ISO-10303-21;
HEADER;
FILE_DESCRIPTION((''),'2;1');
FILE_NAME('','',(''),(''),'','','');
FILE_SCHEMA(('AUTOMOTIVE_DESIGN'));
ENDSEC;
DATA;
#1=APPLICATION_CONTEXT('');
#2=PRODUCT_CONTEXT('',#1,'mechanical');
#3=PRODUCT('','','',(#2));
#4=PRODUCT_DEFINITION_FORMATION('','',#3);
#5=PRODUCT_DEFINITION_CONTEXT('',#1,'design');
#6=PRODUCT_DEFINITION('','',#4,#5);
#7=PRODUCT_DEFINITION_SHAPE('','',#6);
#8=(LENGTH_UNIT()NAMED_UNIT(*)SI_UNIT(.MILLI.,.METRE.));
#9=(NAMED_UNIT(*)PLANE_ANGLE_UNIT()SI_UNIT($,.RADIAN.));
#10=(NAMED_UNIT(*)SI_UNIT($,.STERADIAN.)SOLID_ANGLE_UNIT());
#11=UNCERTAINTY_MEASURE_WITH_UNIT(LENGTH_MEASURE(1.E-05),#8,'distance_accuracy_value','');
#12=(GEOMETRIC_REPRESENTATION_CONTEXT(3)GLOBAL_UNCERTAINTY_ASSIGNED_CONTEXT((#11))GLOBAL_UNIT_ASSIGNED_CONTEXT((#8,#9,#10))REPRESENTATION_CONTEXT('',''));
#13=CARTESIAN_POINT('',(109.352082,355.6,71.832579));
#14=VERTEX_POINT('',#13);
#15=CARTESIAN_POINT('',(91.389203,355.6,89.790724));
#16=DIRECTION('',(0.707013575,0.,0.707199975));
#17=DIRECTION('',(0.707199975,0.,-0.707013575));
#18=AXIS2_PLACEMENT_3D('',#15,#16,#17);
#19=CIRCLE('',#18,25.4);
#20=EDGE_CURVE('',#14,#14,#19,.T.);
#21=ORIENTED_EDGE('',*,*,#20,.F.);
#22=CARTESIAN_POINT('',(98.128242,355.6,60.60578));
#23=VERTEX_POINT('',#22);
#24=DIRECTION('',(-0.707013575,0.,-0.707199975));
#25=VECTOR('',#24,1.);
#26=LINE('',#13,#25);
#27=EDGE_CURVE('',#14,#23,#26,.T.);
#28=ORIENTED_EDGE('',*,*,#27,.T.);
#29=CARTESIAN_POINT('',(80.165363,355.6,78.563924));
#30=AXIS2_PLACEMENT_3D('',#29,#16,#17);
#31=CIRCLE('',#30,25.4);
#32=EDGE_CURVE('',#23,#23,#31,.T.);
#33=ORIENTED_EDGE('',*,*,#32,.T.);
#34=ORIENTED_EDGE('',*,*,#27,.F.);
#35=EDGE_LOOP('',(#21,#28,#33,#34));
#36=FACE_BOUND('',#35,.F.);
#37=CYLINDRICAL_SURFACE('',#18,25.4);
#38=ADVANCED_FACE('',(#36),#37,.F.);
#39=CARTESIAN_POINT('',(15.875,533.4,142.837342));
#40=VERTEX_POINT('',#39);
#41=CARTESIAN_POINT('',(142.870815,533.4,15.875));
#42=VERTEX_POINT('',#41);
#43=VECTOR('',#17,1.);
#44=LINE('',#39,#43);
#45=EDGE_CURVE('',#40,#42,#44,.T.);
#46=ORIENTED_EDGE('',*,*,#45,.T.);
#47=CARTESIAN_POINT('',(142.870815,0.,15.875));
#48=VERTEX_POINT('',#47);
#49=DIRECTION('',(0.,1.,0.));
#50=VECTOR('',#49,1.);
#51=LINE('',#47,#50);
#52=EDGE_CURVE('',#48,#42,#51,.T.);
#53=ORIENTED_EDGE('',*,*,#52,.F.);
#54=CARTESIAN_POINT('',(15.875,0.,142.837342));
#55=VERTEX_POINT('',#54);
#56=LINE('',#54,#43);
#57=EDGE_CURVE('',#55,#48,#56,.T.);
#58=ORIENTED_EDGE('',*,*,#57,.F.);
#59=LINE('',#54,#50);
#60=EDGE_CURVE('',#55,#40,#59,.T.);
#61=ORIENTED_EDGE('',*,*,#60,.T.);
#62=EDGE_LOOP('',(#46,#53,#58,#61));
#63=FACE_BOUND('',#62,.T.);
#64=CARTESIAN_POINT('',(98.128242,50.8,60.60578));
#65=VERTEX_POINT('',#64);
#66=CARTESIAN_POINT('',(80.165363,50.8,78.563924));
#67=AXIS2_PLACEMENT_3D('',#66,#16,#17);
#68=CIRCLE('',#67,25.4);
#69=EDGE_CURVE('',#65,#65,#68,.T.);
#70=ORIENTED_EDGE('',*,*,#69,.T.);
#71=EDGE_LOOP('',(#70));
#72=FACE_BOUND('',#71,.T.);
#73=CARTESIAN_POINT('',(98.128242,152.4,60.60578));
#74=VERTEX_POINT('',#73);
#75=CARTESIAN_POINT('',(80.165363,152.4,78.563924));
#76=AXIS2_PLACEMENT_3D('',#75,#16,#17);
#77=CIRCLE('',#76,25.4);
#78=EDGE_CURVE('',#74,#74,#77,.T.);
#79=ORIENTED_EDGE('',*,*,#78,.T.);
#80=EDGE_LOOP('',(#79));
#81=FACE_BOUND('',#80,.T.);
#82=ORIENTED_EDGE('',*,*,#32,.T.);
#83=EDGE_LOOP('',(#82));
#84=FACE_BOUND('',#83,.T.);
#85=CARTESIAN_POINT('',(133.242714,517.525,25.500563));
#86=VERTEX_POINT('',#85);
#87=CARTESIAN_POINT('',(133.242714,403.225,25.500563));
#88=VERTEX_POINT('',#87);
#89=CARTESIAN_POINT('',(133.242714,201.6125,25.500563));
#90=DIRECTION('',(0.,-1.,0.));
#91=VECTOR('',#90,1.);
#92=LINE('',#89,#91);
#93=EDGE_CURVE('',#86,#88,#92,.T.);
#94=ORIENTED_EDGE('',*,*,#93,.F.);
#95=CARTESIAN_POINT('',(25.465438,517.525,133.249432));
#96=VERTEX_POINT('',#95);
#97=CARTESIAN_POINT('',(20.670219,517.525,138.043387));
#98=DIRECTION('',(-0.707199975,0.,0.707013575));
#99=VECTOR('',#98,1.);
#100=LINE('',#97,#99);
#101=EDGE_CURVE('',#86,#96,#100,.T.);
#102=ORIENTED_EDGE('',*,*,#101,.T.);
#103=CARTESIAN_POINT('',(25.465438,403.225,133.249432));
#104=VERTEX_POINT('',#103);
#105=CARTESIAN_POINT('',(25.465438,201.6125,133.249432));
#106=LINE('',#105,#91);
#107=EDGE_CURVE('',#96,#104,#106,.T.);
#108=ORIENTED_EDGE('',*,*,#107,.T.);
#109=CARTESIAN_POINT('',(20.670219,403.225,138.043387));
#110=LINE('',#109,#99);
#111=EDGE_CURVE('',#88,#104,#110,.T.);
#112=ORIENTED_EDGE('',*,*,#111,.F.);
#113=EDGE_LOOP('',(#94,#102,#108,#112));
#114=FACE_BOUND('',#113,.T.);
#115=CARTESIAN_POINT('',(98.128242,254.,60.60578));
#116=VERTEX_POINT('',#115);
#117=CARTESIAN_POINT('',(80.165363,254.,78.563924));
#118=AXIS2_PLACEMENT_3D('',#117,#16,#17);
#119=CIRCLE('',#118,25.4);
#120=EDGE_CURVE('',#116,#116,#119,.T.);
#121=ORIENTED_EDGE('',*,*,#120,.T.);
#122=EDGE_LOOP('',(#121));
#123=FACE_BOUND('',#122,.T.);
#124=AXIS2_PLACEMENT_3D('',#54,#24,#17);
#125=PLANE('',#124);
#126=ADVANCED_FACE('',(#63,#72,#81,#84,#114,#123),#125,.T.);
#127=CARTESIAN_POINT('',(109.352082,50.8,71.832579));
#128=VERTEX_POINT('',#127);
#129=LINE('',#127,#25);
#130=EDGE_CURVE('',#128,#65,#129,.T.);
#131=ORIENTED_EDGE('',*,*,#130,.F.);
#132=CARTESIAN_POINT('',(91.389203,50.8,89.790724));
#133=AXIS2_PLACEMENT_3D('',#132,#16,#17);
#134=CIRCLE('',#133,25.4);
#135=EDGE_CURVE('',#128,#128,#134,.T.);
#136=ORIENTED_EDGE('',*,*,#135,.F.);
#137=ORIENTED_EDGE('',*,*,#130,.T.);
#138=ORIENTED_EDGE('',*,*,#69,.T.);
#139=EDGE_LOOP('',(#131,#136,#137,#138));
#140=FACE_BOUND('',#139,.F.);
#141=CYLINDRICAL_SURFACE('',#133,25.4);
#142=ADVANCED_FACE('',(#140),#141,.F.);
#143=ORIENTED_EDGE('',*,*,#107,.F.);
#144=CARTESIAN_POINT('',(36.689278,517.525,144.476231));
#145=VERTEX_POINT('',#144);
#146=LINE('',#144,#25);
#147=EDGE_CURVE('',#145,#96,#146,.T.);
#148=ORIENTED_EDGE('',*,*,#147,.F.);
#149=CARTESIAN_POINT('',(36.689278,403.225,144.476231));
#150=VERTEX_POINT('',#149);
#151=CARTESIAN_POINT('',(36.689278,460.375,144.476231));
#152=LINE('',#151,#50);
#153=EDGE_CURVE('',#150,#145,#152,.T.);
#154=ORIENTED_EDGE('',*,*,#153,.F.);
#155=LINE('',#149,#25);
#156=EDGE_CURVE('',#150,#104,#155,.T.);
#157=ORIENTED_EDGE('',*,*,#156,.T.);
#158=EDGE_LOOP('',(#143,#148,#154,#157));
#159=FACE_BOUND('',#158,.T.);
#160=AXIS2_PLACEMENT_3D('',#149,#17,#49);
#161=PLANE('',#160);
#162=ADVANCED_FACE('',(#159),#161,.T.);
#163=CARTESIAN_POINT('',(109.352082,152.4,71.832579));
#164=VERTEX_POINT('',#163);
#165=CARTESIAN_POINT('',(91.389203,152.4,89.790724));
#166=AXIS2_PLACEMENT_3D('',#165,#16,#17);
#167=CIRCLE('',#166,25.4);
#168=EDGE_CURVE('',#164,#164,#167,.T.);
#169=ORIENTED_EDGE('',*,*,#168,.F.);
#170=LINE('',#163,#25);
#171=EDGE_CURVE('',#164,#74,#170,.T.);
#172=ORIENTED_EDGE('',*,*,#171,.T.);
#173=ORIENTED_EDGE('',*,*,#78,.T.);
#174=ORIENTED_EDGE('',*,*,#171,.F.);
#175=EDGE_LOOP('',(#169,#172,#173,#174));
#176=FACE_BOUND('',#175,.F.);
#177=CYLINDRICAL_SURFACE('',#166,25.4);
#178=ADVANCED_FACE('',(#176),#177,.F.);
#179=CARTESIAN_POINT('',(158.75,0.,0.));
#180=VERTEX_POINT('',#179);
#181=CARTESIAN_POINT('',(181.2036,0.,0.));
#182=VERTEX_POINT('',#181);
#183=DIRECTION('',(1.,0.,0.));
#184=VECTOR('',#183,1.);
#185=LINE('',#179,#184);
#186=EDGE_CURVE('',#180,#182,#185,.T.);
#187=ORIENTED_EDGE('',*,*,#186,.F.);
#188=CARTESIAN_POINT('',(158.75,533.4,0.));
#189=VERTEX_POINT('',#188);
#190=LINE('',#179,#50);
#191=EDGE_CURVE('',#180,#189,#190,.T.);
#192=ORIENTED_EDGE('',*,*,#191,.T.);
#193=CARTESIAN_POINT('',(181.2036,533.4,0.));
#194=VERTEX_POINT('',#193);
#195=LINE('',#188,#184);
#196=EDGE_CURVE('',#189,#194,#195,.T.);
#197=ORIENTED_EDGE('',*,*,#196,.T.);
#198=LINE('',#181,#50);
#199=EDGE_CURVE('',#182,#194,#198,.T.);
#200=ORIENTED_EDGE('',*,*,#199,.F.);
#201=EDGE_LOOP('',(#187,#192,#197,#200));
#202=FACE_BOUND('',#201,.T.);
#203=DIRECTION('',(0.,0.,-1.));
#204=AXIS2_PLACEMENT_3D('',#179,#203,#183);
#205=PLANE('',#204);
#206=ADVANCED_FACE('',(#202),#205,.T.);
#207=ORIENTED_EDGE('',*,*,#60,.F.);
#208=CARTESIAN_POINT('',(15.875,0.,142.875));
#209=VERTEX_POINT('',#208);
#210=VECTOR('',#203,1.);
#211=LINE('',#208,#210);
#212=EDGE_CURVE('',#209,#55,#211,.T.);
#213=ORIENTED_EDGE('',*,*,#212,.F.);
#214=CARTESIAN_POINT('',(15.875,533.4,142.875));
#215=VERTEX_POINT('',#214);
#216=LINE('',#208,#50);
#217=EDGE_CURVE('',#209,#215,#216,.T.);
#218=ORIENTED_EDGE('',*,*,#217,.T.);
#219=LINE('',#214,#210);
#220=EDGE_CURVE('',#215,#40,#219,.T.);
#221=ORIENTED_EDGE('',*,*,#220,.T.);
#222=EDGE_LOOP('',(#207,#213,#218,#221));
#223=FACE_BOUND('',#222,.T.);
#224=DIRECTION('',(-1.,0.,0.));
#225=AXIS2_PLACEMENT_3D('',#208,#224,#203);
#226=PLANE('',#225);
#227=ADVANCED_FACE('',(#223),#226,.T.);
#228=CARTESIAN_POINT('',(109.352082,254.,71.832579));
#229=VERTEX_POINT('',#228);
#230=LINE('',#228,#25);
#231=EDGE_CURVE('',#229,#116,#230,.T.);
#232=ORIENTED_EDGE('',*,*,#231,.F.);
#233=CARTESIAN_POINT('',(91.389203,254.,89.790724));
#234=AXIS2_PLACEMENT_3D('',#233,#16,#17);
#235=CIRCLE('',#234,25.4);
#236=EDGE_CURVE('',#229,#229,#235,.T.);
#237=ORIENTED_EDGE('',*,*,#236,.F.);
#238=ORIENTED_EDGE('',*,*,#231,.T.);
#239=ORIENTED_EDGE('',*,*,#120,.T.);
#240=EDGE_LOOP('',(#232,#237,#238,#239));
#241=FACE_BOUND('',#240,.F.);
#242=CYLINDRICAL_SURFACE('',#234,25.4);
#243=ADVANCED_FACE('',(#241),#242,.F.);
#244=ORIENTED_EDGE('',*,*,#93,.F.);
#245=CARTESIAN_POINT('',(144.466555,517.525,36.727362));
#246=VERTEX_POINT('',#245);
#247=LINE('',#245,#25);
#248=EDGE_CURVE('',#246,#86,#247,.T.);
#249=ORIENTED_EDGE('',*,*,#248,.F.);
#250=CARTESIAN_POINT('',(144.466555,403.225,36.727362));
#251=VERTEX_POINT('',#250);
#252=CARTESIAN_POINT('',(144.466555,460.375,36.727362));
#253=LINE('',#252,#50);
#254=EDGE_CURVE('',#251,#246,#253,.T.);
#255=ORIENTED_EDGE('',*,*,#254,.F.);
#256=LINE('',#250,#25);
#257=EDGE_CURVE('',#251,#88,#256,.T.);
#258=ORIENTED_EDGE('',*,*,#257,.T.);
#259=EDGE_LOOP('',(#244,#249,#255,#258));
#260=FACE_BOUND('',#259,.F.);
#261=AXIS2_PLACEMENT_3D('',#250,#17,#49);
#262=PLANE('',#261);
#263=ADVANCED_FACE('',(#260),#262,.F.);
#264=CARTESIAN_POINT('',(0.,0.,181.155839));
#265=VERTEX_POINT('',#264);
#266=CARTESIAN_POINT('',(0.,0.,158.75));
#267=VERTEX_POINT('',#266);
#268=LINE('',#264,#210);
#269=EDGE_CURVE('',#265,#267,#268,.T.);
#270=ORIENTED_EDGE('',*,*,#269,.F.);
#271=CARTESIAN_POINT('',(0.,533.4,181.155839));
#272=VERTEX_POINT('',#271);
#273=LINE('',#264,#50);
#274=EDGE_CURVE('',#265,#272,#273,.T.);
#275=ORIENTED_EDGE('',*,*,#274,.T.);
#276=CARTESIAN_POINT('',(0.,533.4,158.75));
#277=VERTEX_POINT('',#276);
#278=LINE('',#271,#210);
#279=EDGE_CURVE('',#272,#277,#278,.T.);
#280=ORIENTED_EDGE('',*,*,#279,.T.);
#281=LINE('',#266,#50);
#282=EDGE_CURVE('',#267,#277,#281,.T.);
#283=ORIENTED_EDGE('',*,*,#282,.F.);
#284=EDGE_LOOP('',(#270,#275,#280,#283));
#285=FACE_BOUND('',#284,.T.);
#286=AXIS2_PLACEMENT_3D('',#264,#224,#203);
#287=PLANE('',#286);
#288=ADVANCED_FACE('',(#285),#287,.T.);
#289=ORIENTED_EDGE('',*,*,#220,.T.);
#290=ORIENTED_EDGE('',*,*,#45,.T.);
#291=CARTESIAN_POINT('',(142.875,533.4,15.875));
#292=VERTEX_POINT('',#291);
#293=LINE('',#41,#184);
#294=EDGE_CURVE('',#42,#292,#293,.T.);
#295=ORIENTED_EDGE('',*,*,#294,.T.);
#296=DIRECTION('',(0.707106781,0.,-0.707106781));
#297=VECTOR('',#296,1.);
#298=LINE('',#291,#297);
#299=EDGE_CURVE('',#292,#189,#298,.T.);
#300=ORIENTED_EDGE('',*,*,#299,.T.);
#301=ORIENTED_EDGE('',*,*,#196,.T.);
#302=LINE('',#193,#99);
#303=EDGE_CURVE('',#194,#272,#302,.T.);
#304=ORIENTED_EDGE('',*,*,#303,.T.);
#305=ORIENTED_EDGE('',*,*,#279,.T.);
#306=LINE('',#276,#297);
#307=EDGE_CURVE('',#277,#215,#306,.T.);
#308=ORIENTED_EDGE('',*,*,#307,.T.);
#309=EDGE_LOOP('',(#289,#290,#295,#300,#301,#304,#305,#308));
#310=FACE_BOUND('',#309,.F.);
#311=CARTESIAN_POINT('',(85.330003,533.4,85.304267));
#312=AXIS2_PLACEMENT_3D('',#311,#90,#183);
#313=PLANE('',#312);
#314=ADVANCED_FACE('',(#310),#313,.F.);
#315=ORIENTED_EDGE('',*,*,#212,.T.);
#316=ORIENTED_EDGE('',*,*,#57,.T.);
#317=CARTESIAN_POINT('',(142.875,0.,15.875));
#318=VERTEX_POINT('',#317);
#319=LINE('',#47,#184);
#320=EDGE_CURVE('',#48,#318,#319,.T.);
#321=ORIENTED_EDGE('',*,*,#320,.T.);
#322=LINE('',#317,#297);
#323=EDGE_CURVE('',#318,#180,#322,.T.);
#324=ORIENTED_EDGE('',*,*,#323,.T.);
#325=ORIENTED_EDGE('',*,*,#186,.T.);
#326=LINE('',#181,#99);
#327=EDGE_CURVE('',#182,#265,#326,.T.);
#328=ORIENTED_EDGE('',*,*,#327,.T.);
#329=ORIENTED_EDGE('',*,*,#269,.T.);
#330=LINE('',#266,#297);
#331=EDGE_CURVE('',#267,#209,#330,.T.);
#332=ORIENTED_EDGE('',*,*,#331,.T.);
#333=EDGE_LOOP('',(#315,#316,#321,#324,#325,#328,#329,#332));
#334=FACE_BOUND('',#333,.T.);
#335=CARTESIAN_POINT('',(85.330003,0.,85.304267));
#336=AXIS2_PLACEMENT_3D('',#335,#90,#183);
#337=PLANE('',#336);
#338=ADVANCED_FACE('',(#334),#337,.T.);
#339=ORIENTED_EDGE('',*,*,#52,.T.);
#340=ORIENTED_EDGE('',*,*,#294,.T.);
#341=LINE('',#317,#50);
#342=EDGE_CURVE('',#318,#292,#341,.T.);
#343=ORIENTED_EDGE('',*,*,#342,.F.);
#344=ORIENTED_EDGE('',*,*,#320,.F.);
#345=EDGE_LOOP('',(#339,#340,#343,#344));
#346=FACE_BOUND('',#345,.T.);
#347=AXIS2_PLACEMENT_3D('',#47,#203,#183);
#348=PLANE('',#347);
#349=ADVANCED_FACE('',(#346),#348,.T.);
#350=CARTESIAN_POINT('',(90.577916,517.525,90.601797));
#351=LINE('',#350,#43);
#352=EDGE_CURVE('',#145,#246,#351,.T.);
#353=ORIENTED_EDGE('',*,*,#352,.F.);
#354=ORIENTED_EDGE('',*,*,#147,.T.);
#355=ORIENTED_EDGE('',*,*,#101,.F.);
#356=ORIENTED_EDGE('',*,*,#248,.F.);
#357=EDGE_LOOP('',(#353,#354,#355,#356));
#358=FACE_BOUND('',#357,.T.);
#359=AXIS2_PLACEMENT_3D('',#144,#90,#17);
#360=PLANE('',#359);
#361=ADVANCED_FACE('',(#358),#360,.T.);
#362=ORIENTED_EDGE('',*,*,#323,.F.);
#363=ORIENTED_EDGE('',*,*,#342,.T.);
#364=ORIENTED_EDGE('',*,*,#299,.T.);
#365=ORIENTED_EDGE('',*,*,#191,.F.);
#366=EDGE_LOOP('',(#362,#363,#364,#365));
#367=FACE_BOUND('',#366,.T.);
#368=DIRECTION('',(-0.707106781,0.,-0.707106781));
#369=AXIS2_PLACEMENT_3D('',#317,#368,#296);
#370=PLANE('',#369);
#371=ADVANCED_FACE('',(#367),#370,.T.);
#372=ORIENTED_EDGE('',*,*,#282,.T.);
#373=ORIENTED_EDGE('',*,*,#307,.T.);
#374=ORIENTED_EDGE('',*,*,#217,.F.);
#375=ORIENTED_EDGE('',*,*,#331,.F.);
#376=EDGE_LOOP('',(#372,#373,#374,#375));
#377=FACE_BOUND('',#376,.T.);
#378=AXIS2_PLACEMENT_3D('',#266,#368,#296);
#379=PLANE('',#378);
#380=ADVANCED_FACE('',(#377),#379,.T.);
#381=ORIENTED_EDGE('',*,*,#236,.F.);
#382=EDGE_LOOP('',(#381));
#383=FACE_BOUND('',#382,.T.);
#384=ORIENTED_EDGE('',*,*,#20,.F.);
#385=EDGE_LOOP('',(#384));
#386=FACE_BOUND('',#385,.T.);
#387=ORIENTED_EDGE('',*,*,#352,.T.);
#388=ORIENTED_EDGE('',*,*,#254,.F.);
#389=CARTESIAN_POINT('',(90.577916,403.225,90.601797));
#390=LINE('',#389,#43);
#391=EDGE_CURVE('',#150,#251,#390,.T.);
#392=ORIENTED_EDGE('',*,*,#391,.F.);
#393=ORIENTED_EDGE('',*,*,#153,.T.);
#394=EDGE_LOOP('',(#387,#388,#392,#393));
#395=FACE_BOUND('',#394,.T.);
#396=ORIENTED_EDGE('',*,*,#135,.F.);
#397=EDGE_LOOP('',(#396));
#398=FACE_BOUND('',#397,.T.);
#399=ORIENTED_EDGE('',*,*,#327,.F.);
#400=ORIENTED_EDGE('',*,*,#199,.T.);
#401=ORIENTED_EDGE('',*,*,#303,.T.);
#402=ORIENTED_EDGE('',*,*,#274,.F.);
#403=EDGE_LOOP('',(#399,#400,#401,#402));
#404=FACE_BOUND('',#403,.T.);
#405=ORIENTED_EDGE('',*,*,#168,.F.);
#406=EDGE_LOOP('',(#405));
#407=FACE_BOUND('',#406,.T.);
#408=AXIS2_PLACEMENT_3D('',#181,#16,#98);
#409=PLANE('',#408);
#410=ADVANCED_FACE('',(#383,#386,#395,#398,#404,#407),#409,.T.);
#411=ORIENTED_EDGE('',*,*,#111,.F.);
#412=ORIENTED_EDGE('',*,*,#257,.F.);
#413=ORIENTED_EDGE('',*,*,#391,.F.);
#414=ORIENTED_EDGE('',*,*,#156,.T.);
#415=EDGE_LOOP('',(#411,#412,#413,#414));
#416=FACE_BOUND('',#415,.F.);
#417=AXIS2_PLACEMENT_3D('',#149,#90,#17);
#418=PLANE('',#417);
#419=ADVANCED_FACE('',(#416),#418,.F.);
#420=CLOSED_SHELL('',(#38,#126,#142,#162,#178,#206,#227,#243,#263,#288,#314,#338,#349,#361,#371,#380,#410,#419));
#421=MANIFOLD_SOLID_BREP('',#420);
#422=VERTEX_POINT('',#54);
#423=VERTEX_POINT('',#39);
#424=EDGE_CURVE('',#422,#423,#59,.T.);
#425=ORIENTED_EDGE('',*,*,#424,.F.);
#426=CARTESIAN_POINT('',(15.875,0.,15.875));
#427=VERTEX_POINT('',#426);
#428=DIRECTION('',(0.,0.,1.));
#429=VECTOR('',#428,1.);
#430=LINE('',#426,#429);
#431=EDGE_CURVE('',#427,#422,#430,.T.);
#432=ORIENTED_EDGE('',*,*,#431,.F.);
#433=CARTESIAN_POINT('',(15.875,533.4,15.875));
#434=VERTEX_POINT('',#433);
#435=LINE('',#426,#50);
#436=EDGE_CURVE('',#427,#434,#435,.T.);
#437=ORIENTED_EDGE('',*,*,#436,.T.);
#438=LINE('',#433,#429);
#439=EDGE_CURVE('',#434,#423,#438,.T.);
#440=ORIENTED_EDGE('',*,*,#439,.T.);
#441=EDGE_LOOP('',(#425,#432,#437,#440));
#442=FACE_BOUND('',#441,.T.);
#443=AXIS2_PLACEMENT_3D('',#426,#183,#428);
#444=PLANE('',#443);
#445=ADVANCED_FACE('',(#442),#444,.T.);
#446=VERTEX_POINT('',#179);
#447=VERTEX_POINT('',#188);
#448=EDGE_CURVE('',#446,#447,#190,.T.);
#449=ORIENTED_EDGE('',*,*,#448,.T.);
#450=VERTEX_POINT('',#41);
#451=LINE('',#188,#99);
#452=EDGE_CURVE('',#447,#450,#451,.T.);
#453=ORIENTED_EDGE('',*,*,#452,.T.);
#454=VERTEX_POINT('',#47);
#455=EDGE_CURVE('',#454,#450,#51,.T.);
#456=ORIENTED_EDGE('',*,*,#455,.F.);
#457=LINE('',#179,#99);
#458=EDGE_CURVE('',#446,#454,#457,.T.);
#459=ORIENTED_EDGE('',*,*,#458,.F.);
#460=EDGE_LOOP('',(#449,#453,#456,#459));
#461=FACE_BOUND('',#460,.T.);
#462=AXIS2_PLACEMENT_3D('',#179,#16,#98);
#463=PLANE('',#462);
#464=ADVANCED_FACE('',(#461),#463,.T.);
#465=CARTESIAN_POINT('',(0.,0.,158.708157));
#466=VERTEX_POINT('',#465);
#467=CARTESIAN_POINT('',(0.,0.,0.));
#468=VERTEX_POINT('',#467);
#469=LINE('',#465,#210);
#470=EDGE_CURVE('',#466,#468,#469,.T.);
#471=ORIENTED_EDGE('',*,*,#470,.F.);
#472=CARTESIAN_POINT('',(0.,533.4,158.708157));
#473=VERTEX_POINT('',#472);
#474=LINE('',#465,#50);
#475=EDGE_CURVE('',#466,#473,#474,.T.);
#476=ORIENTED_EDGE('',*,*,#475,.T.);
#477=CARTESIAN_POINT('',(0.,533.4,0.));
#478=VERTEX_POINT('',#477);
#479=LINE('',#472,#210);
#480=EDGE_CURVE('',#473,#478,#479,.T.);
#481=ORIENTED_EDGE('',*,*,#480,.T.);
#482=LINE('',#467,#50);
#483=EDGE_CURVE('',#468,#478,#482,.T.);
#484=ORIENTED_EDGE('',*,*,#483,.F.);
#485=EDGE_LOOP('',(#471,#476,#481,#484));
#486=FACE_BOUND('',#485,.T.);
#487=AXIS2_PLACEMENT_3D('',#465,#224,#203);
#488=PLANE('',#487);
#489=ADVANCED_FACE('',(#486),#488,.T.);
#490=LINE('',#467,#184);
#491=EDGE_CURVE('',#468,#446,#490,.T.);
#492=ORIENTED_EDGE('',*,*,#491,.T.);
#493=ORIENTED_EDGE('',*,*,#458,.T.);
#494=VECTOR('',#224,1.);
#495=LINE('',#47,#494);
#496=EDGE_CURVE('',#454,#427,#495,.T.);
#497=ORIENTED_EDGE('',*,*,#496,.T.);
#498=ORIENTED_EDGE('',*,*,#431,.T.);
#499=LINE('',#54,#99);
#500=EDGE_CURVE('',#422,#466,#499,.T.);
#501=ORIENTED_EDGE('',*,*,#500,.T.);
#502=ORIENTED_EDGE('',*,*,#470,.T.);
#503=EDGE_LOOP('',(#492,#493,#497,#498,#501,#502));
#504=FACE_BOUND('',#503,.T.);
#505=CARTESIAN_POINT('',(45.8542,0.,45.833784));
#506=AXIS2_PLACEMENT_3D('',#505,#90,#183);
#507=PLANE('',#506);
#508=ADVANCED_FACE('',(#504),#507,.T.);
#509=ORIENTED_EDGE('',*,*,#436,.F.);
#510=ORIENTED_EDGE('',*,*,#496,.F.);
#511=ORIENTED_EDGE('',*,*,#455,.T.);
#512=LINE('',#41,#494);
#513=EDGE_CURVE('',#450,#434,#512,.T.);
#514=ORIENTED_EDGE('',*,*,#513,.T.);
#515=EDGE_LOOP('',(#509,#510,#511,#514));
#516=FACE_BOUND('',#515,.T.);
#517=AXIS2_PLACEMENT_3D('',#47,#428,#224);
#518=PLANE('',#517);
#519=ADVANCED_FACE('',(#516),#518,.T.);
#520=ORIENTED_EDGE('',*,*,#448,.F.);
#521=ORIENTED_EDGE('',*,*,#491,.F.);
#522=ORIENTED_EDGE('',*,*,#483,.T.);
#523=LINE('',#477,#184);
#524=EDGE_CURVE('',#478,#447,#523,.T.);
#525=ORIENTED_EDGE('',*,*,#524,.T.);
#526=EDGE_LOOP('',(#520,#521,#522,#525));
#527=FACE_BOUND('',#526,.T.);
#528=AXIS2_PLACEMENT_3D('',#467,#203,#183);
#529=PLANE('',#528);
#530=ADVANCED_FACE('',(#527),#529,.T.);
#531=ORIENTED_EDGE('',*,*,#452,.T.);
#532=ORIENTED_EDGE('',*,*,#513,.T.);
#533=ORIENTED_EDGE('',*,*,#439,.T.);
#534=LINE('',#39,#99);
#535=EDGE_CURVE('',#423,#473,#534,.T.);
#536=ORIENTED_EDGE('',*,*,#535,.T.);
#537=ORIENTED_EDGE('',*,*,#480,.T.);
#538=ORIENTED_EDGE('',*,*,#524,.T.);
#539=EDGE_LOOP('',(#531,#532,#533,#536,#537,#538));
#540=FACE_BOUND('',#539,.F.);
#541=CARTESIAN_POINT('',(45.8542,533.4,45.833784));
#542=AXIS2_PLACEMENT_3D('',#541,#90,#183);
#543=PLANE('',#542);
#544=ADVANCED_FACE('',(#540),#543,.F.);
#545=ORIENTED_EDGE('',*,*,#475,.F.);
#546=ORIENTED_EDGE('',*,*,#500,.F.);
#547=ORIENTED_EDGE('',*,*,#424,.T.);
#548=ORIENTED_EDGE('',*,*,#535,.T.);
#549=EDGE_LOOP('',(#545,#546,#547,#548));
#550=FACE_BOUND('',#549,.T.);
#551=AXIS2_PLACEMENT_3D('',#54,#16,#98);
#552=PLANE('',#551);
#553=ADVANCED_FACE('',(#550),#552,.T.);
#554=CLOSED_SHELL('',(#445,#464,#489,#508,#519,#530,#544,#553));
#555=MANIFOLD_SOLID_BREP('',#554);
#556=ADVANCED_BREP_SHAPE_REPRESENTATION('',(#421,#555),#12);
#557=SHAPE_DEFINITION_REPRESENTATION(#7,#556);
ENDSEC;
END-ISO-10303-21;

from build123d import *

# Parameters (mm, degrees)
F1_DEPTH = 533.4
F3_R     = 25.4
F3_W     = 152.4
F3_H     = 114.3
F4_DEPTH = 17.78


# Not quite as in the source:
# - a feature names something its author has since deleted; it is built from what else it names


with BuildPart() as f1:
    # F0 (on Front) → F1 (new body)
    with BuildSketch(Plane.XZ):
        Polygon((0, 158.7081573489), (0, 0), (158.75, 0), (142.8708146317, 15.875), (15.875, 15.875), (15.875, 142.837341614), align=None)
    extrude(amount=-F1_DEPTH)


with BuildPart() as f1b:
    # F0 (on Front) → F1, piece 2 (new body)
    with BuildSketch(Plane.XZ):
        Polygon((142.875, 15.875), (158.75, 0), (181.2036, 0), (0, 181.1558391243), (0, 158.75), (15.875, 142.875), (15.875, 142.837341614), (142.8708146317, 15.875), align=None)
    extrude(amount=-F1_DEPTH)

    # F3 (on face) → F4 (cut)
    with BuildSketch(Plane(origin=(90.577916415, 0, 90.601796852), x_dir=(0.7071999754, 0, -0.7070135747), z_dir=(0.7070135747, 0, 0.7071999754))):
        with Locations((1.1471814675, 50.8)):
            Circle(F3_R)
        with Locations((1.1471814675, 152.4)):
            Circle(F3_R)
        with Locations((1.1471814675, 254)):
            Circle(F3_R)
        with Locations((1.1471814675, 355.6)):
            Circle(F3_R)
        with Locations((0, 460.375)):
            Rectangle(F3_W, F3_H)
    extrude(amount=-F4_DEPTH, mode=Mode.SUBTRACT)


solid = Compound([f1.part, f1b.part])
